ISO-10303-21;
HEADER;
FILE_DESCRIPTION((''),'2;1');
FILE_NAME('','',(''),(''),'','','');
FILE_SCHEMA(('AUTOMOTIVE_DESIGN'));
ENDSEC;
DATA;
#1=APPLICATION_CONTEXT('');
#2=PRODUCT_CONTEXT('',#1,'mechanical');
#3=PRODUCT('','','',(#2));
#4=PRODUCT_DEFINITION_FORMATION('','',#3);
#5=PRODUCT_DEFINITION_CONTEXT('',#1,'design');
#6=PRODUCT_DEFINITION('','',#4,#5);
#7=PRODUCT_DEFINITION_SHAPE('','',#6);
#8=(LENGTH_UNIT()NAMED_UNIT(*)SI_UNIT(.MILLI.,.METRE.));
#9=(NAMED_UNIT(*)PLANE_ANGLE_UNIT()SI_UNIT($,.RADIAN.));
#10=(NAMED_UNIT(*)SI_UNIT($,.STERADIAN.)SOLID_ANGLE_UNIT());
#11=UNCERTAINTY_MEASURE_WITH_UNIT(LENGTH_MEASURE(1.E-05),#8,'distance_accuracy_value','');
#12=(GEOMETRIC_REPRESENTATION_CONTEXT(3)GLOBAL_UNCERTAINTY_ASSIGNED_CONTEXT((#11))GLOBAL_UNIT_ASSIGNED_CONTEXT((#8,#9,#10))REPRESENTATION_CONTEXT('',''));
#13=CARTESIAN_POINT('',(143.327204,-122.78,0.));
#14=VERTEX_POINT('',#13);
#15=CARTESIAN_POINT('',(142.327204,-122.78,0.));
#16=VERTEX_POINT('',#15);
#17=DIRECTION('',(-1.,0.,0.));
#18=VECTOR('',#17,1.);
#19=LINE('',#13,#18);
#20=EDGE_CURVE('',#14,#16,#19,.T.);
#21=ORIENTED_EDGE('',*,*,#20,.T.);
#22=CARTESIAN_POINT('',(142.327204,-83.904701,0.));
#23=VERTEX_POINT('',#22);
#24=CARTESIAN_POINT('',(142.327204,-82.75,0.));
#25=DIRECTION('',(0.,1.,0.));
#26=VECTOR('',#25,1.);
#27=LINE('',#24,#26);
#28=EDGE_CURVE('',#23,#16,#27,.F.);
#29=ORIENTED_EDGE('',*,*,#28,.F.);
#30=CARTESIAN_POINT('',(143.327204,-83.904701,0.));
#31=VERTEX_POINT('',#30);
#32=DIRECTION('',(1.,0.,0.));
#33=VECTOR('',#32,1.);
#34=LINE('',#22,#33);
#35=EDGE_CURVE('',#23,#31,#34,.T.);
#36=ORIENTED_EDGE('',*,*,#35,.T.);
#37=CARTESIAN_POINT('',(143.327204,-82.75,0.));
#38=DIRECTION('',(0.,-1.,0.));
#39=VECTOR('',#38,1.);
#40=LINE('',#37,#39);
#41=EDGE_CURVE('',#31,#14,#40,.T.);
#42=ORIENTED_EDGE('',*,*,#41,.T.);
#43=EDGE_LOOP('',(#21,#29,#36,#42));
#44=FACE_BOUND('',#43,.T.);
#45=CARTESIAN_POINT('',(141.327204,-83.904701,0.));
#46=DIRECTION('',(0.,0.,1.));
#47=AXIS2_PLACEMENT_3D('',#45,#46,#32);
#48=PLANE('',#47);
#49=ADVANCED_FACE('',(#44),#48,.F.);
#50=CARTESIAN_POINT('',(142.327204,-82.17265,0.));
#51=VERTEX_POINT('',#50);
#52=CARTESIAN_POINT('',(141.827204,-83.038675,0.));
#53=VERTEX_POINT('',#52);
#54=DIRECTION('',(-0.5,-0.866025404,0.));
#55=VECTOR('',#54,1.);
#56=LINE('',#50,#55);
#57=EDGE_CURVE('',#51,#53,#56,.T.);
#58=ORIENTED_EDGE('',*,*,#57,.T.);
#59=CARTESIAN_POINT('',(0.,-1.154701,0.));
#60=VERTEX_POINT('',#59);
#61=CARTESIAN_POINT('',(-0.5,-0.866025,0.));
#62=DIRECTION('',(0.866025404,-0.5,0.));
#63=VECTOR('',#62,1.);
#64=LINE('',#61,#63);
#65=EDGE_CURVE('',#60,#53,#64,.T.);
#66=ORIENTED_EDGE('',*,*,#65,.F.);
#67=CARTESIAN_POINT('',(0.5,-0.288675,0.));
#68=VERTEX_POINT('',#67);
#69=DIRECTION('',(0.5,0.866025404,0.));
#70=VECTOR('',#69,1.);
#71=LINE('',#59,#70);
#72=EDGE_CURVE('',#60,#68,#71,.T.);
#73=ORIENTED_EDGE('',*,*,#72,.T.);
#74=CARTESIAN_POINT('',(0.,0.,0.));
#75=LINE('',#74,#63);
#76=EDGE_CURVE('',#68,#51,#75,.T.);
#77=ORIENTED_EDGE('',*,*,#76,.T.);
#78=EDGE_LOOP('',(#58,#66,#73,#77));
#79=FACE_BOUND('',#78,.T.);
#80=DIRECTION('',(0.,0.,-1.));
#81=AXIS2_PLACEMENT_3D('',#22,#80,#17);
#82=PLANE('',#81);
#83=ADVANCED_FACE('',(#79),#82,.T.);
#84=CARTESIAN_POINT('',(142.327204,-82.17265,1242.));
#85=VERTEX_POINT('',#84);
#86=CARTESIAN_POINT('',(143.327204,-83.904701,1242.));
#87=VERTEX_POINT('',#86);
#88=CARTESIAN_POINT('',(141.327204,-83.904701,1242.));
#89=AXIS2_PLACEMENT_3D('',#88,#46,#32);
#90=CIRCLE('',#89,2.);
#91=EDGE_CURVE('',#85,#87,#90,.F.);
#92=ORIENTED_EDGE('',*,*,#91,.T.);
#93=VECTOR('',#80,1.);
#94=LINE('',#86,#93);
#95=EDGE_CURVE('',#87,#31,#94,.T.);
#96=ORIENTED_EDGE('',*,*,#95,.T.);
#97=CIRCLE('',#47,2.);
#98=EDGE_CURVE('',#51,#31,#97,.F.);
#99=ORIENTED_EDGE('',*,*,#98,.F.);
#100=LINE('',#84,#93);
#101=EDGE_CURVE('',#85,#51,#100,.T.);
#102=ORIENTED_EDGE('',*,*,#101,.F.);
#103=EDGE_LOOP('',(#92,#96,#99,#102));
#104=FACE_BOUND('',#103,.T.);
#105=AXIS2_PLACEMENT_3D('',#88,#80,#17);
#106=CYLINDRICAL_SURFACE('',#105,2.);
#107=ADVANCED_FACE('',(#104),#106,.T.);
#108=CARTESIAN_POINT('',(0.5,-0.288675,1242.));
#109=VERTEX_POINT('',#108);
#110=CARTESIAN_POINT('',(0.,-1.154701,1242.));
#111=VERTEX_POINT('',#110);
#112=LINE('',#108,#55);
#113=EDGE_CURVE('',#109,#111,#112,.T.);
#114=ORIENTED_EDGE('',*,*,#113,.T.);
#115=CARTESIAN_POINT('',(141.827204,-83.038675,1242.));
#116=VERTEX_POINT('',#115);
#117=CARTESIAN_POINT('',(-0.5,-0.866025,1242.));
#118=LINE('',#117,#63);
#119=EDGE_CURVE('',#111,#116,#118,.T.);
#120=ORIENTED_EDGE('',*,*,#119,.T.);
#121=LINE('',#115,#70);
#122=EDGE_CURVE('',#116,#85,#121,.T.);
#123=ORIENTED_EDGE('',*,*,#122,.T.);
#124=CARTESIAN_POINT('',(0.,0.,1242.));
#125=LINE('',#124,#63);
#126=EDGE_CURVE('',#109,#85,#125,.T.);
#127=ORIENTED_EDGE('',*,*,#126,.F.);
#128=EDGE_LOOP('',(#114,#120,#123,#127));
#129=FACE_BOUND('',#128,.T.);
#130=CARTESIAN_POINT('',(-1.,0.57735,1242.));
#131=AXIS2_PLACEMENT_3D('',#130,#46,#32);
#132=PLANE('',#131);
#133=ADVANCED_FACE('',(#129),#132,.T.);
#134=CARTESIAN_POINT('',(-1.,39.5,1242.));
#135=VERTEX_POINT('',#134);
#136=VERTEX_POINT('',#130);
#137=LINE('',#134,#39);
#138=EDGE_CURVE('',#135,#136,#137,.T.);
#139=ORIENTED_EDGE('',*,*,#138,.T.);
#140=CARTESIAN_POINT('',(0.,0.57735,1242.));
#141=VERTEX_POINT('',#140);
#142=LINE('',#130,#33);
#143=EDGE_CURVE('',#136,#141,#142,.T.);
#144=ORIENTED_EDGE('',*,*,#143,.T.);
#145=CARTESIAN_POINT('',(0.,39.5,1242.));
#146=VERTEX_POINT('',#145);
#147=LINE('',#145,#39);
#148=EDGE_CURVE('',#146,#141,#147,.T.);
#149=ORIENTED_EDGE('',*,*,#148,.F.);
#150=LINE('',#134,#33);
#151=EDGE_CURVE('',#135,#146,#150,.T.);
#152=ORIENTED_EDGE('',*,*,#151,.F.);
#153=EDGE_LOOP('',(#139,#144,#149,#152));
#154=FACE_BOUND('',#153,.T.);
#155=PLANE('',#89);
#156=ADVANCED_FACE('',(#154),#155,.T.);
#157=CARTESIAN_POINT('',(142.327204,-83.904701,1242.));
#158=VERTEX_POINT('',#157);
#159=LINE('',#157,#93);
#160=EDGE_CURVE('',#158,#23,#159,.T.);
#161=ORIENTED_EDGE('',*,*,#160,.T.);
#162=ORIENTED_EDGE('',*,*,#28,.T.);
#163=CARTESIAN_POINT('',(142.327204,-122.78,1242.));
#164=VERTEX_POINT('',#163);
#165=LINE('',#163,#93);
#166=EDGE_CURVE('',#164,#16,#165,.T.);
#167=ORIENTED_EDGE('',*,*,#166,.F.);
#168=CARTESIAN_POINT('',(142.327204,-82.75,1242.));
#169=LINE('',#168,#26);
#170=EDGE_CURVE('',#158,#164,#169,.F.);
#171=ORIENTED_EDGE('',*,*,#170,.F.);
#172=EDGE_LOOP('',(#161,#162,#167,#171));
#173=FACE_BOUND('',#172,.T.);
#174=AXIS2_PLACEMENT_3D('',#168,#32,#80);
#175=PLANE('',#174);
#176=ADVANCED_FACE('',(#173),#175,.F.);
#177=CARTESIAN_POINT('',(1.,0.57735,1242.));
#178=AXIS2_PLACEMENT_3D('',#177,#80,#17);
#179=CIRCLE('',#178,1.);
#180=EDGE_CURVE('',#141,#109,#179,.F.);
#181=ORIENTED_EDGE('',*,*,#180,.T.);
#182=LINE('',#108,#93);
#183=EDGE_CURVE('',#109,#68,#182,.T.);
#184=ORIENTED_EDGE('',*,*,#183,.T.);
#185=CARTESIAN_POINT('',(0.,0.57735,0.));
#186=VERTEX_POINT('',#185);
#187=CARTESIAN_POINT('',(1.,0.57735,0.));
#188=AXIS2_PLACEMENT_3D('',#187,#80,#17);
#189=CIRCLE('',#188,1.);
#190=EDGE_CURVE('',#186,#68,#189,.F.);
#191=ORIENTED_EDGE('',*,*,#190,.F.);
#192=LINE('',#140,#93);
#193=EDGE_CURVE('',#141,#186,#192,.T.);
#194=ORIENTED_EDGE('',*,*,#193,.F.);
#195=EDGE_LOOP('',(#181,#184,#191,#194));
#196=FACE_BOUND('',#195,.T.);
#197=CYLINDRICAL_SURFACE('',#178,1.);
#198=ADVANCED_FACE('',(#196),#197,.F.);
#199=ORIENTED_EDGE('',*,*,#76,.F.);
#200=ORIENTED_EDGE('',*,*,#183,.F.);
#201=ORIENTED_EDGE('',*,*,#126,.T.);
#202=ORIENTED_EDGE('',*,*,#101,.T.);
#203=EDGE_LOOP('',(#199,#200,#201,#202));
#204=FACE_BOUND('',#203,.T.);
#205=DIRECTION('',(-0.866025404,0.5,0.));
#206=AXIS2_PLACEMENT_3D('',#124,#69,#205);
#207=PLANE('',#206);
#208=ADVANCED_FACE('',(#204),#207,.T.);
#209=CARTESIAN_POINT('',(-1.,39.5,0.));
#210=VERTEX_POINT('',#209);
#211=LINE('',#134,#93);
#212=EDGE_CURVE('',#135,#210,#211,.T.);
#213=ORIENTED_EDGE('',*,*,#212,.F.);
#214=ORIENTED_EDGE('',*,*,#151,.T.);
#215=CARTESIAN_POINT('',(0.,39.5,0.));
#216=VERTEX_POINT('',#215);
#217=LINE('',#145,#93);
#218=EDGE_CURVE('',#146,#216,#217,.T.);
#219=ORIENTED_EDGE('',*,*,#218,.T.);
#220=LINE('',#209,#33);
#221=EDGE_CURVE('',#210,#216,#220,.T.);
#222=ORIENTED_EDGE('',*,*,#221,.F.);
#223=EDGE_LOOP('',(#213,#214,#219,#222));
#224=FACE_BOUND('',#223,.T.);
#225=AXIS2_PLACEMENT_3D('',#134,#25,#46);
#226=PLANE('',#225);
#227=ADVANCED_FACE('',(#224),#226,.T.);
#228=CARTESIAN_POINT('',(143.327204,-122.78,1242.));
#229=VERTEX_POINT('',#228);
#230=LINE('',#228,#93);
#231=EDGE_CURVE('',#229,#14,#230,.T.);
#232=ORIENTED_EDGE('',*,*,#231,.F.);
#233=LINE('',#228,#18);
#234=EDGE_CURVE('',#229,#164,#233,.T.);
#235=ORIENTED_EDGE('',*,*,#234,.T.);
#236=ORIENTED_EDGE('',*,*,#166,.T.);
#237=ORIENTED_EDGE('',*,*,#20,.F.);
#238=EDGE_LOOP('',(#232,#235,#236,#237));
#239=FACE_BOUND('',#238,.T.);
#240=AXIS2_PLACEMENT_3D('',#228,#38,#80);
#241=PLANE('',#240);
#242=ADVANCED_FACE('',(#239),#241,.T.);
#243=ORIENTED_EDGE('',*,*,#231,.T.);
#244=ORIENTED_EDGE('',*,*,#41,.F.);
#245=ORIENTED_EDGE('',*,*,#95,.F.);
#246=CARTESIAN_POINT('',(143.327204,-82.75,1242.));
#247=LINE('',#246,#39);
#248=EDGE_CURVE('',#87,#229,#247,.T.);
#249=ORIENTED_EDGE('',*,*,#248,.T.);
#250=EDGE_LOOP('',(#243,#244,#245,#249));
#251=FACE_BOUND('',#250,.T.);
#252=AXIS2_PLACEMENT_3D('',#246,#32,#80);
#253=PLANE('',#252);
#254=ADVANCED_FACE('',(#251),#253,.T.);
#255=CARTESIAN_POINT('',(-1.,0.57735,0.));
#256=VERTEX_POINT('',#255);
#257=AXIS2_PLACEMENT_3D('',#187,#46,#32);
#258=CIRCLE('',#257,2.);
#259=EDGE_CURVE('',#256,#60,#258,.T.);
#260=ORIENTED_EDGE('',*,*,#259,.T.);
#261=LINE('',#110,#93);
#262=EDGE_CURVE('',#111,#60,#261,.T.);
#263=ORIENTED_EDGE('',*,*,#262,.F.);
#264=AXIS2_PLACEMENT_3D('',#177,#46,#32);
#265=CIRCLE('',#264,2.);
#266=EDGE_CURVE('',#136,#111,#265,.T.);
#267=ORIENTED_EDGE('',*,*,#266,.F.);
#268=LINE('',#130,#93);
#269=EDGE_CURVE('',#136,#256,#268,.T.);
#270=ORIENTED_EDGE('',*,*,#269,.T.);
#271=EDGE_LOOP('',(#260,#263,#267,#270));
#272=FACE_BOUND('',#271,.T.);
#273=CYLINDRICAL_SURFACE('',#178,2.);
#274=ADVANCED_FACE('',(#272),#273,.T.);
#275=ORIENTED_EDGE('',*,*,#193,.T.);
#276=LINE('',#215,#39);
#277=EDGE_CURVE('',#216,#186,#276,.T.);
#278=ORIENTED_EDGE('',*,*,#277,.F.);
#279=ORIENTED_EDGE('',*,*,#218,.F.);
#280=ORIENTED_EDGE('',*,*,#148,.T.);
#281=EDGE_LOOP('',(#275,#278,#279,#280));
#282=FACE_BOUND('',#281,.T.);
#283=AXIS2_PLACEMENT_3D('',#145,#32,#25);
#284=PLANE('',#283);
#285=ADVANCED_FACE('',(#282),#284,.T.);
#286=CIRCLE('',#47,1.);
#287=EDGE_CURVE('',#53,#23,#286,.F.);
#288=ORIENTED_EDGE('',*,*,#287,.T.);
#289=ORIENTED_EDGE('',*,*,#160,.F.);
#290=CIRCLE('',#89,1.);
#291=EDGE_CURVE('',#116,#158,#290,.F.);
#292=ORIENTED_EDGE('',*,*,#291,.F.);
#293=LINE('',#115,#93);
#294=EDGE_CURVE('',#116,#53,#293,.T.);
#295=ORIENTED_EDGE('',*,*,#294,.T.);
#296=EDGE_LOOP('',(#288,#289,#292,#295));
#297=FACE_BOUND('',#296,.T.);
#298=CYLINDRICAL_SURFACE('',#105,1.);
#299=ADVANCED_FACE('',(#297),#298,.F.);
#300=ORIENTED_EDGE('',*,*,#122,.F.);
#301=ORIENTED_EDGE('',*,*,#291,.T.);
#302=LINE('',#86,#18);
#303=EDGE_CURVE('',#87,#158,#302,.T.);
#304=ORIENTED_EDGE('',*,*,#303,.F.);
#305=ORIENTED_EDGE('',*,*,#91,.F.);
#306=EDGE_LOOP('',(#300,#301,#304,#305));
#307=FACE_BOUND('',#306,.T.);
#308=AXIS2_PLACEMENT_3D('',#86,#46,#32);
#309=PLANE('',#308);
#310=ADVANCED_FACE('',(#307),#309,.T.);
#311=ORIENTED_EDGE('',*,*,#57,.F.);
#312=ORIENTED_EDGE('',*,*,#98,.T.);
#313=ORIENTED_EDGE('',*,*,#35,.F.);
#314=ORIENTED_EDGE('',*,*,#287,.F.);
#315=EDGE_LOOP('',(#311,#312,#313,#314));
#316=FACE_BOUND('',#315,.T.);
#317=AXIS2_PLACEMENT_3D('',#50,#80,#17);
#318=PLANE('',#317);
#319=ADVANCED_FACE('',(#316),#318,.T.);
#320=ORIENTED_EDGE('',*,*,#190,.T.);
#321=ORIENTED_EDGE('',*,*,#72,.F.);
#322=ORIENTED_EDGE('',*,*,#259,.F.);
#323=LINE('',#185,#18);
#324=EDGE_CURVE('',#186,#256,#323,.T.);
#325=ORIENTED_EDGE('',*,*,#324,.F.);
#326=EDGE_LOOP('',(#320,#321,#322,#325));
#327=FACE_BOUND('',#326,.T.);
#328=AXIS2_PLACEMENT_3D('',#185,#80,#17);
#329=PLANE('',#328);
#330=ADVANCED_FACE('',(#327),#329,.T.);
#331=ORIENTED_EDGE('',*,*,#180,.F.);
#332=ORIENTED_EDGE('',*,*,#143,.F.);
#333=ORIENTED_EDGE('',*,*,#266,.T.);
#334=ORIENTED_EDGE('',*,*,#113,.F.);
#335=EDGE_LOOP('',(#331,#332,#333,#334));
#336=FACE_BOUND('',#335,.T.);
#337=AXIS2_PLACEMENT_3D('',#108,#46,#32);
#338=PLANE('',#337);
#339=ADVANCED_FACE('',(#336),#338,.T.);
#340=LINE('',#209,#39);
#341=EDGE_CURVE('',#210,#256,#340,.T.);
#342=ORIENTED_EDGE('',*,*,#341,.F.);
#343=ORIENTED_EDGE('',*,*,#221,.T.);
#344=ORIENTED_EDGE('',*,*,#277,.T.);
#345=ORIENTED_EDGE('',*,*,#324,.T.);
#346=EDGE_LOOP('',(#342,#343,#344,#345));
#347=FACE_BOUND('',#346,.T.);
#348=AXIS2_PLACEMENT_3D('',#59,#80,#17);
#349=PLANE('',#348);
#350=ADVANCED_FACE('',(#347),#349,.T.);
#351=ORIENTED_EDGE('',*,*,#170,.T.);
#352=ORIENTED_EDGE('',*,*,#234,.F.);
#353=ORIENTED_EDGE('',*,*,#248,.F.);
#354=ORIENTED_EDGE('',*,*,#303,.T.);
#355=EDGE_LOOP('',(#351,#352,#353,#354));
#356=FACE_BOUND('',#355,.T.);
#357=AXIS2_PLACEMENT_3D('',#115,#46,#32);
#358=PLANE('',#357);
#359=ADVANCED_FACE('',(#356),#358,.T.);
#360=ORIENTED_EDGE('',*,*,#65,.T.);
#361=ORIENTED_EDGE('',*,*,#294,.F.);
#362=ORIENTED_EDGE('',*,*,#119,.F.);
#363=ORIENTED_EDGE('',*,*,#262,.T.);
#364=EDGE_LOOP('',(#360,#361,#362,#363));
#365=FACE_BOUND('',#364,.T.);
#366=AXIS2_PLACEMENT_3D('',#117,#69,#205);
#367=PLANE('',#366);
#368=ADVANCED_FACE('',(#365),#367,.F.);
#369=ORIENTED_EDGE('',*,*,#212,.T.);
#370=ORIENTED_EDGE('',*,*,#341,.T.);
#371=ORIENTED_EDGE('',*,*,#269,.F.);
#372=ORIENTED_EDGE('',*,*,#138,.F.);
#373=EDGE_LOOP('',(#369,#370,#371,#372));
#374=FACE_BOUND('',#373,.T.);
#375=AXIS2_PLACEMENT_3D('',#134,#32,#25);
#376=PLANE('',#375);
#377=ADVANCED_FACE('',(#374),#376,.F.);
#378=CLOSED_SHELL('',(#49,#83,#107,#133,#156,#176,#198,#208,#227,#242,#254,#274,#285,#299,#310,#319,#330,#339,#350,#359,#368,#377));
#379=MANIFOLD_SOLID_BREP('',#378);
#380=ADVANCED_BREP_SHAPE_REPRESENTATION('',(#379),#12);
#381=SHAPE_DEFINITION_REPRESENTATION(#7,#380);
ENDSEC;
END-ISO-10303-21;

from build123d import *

# Parameters (mm, degrees)
BASE_FLANGE1_DEPTH = 1242


# Sheet-metal steps are written as plain solids
with BuildPart() as part:
    # Sketch1 → Base-Flange1 (new body)
    with BuildSketch(Plane.XY):
        with BuildLine():
            Line((0, 39.5), (0, 0.577350269))
            ThreePointArc((0, 0.577350269), (0.133974596, 0.077350269), (0.5, -0.288675135))
            Line((0.5, -0.288675135), (142.327204326, -82.172649731))
            ThreePointArc((142.327204326, -82.172649731), (143.059255134, -82.904700538), (143.327204326, -83.904700538))
            Line((143.327204326, -83.904700538), (143.327204326, -122.78))
            Line((143.327204326, -122.78), (142.327204326, -122.78))
            Line((142.327204326, -122.78), (142.327204326, -83.904700538))
            ThreePointArc((142.327204326, -83.904700538), (142.19322973, -83.404700538), (141.827204326, -83.038675135))
            Line((141.827204326, -83.038675135), (0, -1.154700538))
            ThreePointArc((0, -1.154700538), (-0.732050808, -0.422649731), (-1, 0.577350269))
            Line((-1, 0.577350269), (-1, 39.5))
            Line((-1, 39.5), (0, 39.5))
        make_face()
    extrude(amount=BASE_FLANGE1_DEPTH)


solid = part.part
